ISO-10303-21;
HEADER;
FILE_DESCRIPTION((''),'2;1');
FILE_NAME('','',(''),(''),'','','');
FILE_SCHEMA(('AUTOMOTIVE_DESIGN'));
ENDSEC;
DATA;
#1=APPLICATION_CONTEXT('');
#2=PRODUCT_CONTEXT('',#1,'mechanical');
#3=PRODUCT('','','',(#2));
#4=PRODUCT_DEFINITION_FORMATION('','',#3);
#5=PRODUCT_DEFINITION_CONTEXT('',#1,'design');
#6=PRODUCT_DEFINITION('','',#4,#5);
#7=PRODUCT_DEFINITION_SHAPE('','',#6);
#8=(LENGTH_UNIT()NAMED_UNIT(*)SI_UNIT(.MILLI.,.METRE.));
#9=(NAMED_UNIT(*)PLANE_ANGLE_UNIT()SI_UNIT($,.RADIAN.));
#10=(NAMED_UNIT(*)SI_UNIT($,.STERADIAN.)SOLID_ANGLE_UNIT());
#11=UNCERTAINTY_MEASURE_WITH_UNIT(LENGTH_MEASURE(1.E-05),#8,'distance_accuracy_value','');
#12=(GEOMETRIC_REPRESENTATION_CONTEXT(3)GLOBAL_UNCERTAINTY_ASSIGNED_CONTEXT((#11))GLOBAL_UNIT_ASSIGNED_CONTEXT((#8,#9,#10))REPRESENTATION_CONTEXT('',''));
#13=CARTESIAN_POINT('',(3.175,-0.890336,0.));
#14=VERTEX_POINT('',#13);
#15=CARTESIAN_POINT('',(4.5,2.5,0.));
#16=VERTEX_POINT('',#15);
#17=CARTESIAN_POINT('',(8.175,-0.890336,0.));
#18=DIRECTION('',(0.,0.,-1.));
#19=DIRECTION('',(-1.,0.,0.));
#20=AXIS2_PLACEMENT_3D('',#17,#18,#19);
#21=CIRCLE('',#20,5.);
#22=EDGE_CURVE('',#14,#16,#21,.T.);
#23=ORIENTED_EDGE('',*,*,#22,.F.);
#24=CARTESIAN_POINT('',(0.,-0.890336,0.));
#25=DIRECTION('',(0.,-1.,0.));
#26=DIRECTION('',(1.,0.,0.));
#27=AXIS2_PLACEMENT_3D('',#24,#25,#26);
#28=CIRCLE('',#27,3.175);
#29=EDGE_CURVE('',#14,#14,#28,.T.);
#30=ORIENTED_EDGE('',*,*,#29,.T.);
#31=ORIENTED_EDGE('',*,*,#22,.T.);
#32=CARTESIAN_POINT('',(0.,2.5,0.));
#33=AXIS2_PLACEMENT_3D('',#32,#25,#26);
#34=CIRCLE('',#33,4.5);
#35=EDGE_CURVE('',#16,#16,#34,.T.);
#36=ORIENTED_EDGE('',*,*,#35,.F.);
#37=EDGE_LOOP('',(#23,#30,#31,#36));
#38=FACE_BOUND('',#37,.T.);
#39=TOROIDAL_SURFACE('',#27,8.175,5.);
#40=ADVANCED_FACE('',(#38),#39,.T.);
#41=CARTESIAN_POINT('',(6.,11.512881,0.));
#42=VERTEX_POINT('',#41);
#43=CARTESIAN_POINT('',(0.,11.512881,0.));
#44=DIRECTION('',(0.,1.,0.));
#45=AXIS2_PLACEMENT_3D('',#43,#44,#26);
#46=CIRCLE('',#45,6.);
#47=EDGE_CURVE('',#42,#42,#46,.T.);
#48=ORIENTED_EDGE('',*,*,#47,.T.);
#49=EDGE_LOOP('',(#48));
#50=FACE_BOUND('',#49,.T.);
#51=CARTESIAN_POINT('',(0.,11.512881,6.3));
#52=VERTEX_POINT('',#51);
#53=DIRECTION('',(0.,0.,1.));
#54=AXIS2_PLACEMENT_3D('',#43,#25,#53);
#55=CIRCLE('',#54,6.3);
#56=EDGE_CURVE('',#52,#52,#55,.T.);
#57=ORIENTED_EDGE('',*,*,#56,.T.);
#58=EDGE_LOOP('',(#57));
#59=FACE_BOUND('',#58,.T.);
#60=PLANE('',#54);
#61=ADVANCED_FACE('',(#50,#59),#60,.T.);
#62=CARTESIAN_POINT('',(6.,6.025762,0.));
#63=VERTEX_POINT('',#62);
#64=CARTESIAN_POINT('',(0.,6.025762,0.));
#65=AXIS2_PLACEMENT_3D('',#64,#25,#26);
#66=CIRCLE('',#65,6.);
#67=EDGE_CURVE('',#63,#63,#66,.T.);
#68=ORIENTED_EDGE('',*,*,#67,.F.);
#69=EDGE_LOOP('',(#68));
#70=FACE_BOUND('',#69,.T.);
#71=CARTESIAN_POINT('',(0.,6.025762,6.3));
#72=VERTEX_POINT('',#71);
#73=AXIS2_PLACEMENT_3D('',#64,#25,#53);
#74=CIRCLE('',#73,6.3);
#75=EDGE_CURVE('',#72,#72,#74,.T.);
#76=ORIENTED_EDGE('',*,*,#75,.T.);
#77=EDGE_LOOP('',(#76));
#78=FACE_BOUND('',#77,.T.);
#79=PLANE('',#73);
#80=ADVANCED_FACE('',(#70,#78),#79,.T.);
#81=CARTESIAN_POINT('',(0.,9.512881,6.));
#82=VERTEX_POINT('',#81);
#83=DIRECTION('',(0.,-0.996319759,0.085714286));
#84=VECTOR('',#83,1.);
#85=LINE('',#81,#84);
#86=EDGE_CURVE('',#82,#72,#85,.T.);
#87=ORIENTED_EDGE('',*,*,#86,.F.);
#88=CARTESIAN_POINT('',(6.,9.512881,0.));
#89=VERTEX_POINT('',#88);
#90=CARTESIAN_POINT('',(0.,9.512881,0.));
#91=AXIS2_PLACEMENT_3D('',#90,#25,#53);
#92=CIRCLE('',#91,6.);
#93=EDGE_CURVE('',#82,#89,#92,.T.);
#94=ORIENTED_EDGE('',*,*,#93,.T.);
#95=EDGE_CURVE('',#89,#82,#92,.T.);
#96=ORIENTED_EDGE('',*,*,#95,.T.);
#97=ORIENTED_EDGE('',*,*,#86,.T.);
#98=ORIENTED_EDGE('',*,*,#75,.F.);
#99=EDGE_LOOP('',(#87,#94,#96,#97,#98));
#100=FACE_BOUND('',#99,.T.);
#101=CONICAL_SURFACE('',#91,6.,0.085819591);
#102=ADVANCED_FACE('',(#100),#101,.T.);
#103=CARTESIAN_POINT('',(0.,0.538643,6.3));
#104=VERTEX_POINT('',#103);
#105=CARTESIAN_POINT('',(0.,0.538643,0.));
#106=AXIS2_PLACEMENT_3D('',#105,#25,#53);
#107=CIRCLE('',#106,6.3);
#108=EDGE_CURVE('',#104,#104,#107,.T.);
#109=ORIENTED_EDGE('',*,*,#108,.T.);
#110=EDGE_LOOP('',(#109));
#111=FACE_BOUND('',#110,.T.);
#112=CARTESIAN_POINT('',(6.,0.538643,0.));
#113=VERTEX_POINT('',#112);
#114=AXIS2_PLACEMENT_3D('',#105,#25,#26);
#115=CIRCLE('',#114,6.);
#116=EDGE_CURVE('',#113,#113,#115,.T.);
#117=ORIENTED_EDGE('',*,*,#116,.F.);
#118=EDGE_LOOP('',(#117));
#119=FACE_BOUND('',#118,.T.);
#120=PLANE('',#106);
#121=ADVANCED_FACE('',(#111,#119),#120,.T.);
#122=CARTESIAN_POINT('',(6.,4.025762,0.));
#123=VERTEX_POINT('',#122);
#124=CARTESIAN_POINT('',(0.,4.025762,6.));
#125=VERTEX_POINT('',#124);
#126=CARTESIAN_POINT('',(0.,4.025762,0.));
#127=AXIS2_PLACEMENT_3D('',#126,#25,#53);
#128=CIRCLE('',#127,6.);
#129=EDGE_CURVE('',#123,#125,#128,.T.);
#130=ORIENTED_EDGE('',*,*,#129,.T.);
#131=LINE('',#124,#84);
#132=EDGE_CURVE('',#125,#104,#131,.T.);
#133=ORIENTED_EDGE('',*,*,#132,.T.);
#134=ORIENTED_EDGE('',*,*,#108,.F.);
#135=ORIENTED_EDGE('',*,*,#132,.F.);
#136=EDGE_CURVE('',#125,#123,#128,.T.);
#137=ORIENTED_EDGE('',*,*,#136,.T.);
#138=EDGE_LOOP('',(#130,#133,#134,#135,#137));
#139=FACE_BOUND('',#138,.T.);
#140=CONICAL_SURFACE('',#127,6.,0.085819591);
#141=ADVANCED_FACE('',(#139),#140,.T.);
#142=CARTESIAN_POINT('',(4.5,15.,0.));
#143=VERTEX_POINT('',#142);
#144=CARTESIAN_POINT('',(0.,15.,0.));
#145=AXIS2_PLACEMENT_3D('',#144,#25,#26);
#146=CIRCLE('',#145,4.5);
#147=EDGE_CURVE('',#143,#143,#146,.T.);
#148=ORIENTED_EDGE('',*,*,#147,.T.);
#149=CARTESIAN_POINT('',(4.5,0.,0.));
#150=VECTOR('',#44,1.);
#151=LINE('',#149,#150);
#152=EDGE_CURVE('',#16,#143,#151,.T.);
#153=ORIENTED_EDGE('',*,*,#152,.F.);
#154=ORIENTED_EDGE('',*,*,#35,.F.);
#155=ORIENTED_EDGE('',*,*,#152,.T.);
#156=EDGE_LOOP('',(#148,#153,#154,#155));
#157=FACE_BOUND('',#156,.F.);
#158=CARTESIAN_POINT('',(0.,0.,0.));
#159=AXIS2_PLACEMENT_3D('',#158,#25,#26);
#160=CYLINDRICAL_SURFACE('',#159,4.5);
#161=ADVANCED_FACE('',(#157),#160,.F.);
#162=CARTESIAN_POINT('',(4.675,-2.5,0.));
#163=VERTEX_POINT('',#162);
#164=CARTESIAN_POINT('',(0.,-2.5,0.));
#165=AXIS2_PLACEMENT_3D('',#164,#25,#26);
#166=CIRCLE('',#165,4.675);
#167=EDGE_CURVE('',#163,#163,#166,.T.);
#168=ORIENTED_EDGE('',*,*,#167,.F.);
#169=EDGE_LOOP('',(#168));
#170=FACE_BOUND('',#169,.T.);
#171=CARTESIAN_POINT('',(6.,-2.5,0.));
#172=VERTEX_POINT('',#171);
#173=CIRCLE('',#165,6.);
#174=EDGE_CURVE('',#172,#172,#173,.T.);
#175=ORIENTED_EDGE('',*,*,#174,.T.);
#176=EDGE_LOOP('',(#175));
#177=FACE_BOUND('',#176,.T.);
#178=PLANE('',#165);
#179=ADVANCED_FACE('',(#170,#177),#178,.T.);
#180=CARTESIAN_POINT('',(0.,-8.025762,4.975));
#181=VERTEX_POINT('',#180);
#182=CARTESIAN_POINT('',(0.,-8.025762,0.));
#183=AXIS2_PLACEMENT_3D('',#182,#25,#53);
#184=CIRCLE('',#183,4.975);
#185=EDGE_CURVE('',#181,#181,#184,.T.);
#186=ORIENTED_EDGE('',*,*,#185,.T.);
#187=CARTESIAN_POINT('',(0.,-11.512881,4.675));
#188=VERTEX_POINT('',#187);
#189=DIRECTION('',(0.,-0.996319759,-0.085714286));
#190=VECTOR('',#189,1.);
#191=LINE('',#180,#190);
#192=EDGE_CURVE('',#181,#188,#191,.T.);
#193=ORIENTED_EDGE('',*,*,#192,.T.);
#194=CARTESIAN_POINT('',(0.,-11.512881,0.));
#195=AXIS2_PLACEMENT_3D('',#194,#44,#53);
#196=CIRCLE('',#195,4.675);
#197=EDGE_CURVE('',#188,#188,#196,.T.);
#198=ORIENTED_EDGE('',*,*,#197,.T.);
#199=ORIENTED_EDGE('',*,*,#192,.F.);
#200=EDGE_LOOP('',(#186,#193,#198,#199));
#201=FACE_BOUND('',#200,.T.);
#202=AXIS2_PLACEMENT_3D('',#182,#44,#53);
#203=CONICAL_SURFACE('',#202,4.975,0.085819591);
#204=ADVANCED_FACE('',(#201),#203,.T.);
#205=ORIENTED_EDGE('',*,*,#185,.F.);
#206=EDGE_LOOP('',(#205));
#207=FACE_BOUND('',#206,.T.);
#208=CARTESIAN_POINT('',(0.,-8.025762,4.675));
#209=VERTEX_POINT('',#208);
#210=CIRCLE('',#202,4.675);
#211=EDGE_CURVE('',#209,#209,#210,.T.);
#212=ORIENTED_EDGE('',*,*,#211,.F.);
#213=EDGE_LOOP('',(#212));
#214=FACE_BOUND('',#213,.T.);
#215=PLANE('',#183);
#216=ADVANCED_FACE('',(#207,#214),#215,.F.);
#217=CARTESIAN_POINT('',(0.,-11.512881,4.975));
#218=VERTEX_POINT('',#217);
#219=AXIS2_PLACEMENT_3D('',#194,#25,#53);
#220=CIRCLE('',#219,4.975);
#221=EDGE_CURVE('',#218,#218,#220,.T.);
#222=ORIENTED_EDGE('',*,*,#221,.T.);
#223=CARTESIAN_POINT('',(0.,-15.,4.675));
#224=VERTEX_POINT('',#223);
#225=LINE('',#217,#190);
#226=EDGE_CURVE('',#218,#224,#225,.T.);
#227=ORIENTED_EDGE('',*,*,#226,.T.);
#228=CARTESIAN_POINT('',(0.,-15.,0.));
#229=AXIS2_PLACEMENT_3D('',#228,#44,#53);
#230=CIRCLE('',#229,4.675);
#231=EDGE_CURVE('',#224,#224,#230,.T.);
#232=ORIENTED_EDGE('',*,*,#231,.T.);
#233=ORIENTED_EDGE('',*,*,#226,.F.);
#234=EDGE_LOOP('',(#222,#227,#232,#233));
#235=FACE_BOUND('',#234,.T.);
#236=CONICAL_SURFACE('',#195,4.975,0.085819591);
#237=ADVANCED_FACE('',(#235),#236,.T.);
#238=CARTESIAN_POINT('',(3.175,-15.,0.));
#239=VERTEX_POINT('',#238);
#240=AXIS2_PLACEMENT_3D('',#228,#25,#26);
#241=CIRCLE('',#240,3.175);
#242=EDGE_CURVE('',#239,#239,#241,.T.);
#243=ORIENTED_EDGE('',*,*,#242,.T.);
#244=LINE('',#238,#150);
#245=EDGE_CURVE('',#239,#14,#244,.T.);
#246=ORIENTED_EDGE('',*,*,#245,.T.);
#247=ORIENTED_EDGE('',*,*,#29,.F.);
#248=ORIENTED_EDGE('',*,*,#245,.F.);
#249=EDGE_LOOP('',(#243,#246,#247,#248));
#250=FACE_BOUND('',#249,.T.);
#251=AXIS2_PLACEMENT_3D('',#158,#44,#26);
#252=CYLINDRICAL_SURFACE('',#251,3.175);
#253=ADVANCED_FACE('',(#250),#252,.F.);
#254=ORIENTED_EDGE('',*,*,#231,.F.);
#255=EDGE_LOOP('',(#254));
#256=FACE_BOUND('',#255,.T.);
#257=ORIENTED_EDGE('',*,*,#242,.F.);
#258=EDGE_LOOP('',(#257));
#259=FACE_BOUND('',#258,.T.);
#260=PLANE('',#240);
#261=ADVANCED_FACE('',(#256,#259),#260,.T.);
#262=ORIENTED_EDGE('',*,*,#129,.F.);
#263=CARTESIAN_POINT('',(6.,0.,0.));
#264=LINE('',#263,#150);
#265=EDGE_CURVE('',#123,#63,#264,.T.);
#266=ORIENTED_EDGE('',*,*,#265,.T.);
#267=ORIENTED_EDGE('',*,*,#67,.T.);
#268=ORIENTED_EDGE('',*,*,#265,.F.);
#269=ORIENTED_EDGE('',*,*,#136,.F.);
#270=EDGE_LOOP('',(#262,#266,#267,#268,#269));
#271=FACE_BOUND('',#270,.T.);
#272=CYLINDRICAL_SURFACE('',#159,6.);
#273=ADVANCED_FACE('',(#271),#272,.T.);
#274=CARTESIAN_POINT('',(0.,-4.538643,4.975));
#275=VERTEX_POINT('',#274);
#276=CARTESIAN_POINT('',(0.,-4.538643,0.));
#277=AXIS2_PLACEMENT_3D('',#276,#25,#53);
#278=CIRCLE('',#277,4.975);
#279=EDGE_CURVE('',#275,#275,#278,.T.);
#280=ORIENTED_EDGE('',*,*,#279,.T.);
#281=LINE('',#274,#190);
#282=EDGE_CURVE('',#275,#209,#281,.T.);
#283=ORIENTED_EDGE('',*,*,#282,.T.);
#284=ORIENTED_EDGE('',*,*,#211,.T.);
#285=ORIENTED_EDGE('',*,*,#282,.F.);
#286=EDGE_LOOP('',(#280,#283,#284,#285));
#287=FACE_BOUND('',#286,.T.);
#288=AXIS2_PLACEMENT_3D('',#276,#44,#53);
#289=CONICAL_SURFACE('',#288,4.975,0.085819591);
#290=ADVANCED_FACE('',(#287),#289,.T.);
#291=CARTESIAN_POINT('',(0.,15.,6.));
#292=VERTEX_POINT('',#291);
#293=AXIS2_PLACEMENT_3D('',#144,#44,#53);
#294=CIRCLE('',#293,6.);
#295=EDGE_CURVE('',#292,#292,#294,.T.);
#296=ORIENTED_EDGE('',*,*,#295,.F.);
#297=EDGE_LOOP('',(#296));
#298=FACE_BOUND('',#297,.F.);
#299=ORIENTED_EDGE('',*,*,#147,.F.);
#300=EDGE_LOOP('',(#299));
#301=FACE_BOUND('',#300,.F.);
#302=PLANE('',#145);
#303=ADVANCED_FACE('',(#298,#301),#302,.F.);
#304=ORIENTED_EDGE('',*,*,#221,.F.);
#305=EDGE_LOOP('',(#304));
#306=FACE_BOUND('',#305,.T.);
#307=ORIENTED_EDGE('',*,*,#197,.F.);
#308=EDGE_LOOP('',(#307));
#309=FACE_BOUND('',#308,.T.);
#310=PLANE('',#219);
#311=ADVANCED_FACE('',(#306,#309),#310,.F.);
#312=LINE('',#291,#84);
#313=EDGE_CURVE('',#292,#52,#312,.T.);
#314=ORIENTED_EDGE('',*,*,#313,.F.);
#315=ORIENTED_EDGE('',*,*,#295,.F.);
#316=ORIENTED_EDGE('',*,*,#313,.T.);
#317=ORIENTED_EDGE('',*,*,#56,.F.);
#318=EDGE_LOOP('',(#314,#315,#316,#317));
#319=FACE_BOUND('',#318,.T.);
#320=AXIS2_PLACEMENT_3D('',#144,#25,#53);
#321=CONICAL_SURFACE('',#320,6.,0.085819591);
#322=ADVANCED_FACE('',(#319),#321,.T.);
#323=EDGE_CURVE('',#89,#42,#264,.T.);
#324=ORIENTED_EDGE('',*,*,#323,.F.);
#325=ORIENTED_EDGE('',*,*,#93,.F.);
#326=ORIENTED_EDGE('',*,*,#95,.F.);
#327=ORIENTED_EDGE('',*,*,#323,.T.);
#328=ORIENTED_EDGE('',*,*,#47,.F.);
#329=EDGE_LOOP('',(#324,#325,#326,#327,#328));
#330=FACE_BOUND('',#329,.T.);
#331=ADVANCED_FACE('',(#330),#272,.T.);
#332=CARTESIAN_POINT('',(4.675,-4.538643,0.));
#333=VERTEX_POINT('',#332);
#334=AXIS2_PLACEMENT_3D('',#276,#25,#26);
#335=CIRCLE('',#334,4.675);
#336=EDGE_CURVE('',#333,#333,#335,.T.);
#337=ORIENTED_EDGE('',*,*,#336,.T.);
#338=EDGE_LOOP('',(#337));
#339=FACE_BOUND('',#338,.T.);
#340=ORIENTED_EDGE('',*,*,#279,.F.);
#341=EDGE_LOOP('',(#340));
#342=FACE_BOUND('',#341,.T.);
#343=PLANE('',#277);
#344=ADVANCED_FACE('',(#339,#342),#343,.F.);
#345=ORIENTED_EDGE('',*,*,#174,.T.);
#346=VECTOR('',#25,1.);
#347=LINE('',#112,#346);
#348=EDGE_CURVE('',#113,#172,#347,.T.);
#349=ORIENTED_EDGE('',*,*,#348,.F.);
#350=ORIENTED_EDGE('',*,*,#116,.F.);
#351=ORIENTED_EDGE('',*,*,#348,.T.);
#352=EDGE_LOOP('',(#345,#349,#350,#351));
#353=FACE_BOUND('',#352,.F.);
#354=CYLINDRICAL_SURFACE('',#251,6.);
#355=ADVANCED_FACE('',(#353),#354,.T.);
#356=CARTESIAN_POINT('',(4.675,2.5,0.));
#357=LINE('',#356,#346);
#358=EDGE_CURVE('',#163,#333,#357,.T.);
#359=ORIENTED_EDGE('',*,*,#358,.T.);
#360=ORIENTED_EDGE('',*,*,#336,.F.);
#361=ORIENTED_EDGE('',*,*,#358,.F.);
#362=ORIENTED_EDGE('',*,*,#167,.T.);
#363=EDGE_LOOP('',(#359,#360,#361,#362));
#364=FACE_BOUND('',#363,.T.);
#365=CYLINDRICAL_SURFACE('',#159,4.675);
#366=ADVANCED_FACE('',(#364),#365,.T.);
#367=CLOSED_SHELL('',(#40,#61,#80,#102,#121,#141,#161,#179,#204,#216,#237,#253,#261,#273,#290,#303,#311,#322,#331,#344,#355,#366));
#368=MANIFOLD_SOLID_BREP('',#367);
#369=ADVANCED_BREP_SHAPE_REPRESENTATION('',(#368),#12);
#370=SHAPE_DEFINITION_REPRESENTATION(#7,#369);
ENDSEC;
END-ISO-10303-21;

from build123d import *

# Parameters (mm, degrees)
F0_R          = 4.675
F0_R_2        = 3.175
F1_DEPTH      = 15
F1_DEPTH_BACK = 2.5
F2_R          = 6
F2_R_2        = 4.5
F3_DEPTH      = 15
F3_DEPTH_BACK = 2.5


# Not quite as in the source:
# - a fillet or chamfer that OpenCascade refuses, or shapes differently, is made with other operations: its cross-section is extruded or revolved along the edge and cut away or added


with BuildPart() as f1:
    # F0 (on Front) → F1 (new body, two sides)
    with BuildSketch(Plane.XZ) as f1_sk:
        Circle(F0_R)
        Circle(F0_R_2, mode=Mode.SUBTRACT)
    extrude(amount=F1_DEPTH)
    extrude(f1_sk.sketch, amount=-F1_DEPTH_BACK)

    # F2 (on Front) → F3 (join, two sides)
    with BuildSketch(Plane.XZ) as f3_sk:
        Circle(F2_R)
        Circle(F2_R_2, mode=Mode.SUBTRACT)
    extrude(amount=-F3_DEPTH)
    extrude(f3_sk.sketch, amount=F3_DEPTH_BACK)

    # F4 (on Right) → F5 (revolve)
    with BuildSketch(Plane.YZ):
        Polygon((-4.5386425355, 4.975), (-8.0257616903, 4.675), (-4.5386425355, 4.675), align=None)
        Polygon((-8.0257616903, 4.975), (-11.5128808452, 4.675), (-8.0257616903, 4.675), align=None)
        Polygon((-11.5128808452, 4.975), (-15, 4.675), (-11.5128808452, 4.675), align=None)
        Polygon((11.5128808452, 6), (15, 6), (11.5128808452, 6.3), align=None)
        Polygon((6.0257616903, 6), (9.5128808452, 6), (6.0257616903, 6.3), align=None)
        Polygon((0.5386425355, 6), (4.0257616903, 6), (0.5386425355, 6.3), align=None)
    revolve(axis=Axis((0, -13.8101289049, 0), (0, -1, 0)))

    # F6: fillet of radius 5 on 1 edges, made by hand

    # F6_s1 → F6_t2 (revolve, cut)
    with BuildSketch(Plane.XY):
        with BuildLine():
            ThreePointArc((3.175, -0.8903355291), (3.5180159975, 0.9296919432), (4.5, 2.5))
            Line((4.5, 2.5), (4.4265, 2.5678067106))
            ThreePointArc((4.4265, 2.5678067106), (3.8375, 2.6), (3.175, 2.6))
            Line((3.175, 2.6), (3.075, 2.5))
            Line((3.075, 2.5), (3.075, -0.8903355291))
            Line((3.075, -0.8903355291), (3.175, -0.8903355291))
        make_face()
    revolve(axis=Axis((0, 2.5, 0), (0, -1, 0)), mode=Mode.SUBTRACT)


solid = f1.part
